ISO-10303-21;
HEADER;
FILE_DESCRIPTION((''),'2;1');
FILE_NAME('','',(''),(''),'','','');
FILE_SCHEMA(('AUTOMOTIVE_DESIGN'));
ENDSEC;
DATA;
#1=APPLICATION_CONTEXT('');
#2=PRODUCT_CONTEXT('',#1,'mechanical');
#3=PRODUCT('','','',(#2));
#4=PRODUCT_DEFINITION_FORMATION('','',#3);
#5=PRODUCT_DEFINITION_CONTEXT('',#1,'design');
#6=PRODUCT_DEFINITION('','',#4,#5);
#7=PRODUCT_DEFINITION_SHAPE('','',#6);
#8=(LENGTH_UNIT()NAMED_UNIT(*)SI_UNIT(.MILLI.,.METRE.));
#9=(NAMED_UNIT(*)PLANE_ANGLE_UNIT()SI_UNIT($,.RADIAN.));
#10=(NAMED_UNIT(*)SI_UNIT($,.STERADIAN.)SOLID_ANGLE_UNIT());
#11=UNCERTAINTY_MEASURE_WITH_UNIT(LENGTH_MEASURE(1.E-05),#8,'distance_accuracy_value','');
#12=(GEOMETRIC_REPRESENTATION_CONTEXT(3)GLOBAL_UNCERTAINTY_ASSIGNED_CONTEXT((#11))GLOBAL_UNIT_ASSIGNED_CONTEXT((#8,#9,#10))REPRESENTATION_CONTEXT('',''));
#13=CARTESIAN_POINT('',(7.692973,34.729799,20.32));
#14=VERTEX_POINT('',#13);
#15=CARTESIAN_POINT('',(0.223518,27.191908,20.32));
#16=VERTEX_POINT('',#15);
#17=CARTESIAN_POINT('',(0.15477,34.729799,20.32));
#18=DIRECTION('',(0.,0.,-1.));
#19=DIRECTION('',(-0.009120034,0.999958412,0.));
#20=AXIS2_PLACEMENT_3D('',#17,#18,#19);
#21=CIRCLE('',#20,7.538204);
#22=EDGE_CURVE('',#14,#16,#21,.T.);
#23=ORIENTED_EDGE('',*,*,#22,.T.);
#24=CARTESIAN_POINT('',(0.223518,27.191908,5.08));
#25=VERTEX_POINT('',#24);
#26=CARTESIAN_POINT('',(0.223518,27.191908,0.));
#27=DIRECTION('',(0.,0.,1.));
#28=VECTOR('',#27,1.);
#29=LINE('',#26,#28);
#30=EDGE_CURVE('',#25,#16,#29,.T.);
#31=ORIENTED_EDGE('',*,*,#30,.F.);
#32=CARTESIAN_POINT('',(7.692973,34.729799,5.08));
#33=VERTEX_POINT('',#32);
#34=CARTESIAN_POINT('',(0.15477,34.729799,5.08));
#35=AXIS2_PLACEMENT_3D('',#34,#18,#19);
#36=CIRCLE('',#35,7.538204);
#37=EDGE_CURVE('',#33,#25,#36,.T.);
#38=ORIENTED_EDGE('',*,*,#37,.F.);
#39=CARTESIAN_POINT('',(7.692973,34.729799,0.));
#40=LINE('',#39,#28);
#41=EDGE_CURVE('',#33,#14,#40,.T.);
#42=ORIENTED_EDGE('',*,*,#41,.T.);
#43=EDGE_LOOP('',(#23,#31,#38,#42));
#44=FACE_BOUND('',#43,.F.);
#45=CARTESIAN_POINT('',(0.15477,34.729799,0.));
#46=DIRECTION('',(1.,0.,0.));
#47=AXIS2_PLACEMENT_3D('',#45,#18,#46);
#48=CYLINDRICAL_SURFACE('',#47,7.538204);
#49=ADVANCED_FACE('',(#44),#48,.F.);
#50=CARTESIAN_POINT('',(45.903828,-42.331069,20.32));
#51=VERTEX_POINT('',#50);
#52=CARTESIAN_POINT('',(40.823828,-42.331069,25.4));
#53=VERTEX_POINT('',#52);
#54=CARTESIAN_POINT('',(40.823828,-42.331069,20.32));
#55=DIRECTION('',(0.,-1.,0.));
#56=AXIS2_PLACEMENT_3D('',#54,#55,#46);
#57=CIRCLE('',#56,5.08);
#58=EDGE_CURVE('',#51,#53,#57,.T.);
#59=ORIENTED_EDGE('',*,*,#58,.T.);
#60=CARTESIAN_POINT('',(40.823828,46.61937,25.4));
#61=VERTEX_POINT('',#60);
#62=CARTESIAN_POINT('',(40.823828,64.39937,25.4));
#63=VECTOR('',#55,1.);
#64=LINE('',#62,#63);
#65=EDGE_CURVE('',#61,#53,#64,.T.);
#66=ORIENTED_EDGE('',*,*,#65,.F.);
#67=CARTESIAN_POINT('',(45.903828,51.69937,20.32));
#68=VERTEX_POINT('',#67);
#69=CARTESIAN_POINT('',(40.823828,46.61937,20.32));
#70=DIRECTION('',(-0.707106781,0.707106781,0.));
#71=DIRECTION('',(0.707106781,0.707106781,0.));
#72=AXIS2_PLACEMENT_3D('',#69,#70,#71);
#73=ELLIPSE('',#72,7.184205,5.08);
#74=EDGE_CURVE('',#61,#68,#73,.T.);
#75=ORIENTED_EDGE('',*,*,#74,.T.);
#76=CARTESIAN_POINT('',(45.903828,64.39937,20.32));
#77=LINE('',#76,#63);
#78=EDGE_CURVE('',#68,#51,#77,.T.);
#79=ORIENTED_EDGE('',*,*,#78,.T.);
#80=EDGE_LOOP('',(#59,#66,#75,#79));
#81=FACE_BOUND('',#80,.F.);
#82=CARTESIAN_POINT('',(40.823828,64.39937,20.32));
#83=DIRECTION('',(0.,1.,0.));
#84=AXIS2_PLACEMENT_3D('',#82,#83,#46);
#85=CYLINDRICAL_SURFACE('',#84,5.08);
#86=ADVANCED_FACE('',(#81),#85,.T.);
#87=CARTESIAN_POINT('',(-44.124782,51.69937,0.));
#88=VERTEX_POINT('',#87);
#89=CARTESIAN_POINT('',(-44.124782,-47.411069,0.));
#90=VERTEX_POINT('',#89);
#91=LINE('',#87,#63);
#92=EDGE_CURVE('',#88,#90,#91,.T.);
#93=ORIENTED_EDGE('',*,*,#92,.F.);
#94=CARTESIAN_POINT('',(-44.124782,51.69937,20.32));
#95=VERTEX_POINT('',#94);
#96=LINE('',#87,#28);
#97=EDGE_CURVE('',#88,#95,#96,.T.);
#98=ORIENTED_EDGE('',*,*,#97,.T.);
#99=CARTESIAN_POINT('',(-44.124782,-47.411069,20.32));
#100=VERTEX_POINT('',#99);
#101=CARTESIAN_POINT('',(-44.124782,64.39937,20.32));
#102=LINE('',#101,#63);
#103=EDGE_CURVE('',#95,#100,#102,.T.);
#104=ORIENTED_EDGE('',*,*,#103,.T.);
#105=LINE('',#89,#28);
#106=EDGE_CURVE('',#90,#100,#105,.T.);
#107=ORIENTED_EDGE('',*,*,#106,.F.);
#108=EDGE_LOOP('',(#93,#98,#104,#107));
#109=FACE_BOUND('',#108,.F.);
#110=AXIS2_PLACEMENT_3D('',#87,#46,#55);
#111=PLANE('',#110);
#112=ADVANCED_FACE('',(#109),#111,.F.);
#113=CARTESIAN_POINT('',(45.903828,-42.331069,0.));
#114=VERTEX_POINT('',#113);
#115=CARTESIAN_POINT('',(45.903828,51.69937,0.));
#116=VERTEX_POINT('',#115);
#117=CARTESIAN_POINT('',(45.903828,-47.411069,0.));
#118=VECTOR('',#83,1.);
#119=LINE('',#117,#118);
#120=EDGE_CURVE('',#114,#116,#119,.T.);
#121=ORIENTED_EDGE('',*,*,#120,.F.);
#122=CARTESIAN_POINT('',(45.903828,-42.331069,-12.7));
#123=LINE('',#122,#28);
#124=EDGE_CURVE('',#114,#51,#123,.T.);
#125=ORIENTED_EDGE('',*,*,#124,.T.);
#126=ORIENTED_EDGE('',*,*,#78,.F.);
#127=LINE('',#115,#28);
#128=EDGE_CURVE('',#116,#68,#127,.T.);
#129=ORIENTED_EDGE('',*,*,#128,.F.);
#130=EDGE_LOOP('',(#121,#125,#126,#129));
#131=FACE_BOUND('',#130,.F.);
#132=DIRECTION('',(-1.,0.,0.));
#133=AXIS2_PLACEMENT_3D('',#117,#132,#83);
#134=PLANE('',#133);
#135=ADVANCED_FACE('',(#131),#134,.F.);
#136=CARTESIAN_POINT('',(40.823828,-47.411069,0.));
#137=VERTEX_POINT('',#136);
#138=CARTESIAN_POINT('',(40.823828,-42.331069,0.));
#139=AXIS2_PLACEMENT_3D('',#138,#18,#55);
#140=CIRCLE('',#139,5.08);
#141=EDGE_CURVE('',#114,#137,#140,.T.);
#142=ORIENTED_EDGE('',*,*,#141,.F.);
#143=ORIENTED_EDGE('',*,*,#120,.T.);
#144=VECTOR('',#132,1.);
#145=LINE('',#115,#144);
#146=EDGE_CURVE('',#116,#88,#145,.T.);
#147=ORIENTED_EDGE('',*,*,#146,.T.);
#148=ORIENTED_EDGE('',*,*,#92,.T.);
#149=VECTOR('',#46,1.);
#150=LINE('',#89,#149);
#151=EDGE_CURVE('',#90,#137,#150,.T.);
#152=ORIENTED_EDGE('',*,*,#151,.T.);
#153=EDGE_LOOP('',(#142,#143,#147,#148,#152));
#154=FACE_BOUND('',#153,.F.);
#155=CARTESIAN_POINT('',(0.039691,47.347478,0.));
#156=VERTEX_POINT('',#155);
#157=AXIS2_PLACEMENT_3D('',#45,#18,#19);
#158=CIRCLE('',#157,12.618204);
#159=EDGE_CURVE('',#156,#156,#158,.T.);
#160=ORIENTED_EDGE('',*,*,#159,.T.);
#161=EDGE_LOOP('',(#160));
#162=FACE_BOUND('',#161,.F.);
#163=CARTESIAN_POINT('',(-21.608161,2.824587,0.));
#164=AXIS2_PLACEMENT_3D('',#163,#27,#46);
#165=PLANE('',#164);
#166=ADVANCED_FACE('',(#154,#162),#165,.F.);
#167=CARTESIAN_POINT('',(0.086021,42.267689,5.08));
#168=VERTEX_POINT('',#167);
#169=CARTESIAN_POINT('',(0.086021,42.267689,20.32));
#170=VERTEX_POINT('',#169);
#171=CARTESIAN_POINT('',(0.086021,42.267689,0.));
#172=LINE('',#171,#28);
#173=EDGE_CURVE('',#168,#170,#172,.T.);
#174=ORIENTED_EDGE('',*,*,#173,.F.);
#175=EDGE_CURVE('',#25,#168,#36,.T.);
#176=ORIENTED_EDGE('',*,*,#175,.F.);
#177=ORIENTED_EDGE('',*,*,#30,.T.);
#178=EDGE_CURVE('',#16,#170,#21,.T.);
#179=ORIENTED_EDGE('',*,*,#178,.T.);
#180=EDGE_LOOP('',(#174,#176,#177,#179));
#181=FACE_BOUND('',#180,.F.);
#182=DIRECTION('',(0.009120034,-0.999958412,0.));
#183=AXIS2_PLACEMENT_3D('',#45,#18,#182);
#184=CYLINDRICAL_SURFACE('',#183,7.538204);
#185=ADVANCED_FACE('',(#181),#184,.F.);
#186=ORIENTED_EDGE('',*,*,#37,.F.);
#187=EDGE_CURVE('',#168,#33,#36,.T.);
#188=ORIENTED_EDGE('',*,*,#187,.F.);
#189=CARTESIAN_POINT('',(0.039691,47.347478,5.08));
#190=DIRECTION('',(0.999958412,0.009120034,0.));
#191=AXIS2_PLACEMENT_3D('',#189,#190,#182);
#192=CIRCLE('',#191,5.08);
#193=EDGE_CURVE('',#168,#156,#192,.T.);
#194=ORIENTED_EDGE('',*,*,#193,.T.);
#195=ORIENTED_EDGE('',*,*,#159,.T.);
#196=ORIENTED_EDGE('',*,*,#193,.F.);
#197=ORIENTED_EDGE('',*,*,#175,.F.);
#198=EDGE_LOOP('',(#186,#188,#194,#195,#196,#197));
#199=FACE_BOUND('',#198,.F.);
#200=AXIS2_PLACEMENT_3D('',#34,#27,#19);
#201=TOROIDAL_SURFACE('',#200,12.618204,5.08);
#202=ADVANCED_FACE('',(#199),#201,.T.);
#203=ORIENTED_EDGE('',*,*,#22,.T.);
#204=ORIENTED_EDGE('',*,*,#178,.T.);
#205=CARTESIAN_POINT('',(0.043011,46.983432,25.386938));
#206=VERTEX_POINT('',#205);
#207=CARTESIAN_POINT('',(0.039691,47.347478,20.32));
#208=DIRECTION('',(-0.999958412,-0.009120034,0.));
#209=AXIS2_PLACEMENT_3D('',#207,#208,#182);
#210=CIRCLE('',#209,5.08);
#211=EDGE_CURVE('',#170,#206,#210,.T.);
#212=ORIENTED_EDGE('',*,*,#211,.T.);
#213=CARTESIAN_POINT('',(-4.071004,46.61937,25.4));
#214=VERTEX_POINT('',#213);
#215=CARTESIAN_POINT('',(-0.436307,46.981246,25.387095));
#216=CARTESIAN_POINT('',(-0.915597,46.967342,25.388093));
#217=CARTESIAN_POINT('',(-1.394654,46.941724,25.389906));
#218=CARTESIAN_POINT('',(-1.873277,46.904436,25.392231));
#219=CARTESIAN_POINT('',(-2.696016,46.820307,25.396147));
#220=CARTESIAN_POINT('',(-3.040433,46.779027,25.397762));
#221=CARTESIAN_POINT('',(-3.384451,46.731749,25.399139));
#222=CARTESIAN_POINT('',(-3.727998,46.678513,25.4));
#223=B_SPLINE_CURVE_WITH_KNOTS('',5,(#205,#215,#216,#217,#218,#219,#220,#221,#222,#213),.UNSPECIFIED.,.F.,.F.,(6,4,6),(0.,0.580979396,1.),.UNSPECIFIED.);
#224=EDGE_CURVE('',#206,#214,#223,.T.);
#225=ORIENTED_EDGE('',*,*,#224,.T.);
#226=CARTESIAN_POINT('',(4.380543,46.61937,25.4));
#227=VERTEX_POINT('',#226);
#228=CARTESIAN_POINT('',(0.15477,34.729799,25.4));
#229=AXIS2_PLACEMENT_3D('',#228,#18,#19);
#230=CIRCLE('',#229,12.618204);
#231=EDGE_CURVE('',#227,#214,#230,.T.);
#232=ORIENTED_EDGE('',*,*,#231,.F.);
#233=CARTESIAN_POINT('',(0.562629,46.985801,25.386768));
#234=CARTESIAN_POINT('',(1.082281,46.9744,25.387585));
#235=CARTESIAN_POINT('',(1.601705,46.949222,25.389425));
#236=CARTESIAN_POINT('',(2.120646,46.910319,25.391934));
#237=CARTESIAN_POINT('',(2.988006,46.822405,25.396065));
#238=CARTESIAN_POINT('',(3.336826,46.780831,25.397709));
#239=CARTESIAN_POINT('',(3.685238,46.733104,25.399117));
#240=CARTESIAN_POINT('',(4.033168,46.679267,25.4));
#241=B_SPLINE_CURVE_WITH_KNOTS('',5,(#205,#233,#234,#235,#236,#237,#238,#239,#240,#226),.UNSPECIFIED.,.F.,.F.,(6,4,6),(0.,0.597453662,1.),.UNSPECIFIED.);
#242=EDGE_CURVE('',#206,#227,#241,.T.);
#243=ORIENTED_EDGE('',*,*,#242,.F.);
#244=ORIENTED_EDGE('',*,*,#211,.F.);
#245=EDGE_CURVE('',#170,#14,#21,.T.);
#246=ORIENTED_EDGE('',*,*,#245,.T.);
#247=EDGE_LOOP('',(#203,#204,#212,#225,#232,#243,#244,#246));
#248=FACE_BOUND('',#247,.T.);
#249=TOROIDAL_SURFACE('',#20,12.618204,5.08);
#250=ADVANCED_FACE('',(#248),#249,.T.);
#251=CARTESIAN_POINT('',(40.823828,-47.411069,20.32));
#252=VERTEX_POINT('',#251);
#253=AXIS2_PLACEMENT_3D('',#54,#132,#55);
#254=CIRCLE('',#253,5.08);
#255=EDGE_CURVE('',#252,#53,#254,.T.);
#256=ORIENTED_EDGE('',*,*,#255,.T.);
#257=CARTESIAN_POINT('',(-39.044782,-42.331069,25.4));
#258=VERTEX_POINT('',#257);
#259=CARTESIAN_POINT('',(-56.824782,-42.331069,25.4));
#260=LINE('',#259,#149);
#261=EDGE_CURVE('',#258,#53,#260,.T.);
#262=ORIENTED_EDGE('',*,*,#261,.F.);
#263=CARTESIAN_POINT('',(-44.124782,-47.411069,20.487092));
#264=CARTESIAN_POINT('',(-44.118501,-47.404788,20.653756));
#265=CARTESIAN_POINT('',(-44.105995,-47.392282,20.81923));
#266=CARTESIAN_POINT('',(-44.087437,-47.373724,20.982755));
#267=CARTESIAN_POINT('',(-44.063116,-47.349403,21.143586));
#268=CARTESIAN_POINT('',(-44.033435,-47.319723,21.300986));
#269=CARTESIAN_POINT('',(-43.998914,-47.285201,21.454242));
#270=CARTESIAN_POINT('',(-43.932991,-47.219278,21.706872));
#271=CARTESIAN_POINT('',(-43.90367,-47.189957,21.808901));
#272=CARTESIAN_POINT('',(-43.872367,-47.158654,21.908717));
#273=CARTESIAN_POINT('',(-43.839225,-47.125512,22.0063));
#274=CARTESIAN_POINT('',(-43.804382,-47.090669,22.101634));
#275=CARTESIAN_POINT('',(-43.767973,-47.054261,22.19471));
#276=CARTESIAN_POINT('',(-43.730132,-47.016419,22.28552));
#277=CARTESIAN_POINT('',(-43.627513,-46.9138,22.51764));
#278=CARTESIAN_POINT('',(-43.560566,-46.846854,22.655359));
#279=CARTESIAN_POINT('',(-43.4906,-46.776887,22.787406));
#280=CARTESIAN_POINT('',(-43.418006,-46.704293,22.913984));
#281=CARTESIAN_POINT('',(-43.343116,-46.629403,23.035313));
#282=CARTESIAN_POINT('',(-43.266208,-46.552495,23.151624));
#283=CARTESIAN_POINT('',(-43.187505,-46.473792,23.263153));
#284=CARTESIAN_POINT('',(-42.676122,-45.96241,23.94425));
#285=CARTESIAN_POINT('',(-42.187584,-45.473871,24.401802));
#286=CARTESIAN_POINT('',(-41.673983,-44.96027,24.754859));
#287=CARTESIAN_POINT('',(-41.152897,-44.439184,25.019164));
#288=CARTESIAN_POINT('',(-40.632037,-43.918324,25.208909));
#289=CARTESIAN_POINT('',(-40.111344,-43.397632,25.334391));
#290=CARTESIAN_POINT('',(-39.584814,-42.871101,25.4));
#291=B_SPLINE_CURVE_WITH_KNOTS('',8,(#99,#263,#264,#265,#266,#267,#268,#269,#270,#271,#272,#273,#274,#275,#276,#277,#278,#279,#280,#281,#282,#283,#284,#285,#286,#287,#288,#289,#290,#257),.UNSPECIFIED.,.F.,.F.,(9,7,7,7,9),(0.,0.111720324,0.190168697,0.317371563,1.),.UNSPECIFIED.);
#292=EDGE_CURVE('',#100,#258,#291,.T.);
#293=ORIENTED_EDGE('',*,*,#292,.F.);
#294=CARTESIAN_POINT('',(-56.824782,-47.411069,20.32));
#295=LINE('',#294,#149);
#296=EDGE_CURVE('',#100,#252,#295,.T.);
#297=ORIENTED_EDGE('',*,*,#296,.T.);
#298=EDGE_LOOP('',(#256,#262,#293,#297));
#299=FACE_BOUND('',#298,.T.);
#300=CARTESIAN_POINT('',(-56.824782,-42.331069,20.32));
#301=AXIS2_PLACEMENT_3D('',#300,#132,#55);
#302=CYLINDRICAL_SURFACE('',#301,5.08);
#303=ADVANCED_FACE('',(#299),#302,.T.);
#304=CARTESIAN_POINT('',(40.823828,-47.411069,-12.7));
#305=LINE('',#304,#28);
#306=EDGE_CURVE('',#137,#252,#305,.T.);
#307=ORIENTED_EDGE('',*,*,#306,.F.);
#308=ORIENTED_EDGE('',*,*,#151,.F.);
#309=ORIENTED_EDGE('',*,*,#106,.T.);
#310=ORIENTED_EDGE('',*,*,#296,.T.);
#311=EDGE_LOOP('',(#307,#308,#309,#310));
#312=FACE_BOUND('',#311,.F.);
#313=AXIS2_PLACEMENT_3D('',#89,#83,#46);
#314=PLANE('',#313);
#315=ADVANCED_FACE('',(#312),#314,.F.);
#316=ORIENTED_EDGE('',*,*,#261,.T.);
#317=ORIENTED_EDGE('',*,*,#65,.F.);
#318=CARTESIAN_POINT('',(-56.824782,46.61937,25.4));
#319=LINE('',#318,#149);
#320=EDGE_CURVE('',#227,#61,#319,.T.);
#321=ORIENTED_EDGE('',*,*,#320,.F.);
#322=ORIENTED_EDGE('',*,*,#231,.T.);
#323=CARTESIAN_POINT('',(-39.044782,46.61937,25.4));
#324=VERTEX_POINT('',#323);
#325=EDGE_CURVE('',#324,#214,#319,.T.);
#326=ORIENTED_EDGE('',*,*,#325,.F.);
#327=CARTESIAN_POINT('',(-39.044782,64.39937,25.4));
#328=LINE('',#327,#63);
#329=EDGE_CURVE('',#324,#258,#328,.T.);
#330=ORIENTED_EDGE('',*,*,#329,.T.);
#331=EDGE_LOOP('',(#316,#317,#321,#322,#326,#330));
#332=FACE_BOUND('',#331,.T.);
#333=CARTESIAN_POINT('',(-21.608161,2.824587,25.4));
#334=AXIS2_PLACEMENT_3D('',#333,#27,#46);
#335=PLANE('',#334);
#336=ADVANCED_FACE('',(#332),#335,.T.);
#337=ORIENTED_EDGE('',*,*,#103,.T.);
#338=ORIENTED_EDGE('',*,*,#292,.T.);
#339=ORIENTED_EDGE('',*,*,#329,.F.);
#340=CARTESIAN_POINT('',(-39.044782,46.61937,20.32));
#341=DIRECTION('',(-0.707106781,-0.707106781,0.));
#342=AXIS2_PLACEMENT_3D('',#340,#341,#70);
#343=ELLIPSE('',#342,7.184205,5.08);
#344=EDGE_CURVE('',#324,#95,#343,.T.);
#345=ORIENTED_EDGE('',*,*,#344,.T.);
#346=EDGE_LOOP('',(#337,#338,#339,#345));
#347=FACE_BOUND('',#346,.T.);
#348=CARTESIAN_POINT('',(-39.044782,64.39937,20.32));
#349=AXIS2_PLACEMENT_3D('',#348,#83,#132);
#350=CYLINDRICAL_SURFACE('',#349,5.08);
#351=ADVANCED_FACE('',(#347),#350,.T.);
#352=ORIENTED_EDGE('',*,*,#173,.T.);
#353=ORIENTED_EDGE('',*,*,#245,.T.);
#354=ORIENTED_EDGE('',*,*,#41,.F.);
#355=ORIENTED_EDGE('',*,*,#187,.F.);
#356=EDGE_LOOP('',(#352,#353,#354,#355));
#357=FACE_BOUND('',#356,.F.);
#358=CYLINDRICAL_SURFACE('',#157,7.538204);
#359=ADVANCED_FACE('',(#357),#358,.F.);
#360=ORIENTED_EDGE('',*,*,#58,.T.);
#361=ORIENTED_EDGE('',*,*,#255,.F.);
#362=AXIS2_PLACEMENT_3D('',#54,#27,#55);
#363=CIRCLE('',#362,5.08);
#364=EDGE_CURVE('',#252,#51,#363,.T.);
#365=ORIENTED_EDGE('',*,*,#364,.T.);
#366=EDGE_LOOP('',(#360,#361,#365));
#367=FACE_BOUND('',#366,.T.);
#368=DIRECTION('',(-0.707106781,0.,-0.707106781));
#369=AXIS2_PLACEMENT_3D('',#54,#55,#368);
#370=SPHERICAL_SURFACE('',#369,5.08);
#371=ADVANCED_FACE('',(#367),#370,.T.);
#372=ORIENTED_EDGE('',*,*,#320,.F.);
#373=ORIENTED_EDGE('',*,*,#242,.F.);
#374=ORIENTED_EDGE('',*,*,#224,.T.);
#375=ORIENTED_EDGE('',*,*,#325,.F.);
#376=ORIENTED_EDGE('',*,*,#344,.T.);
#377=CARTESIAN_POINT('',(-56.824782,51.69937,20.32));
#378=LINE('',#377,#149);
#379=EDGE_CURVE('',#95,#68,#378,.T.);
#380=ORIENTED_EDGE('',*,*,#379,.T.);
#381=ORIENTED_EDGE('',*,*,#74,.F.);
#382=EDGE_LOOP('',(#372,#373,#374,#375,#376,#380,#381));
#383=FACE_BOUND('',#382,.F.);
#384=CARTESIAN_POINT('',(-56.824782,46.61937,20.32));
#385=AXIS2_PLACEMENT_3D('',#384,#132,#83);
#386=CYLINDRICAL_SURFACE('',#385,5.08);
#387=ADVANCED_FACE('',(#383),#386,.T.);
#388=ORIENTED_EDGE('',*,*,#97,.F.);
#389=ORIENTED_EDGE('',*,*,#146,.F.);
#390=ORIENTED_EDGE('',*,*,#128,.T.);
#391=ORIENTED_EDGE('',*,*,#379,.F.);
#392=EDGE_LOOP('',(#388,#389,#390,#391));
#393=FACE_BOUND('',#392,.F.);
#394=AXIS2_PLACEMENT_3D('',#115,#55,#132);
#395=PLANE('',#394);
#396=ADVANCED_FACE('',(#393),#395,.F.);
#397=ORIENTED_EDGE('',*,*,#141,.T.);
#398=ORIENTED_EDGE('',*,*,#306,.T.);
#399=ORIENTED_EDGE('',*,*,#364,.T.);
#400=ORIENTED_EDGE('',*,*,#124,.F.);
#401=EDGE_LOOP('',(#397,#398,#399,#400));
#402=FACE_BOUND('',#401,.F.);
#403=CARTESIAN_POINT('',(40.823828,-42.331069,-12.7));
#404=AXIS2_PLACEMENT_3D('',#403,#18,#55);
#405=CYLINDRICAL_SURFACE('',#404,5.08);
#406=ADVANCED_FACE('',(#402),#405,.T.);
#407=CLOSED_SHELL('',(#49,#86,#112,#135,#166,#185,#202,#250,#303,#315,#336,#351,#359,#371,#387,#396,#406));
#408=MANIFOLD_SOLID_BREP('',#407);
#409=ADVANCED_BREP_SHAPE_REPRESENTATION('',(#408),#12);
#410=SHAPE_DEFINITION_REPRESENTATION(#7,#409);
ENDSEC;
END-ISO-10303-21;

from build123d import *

# Parameters (mm, degrees)
F1_DEPTH     = 25.4
F2_T1_DEPTH  = 97.6486100805
F2_T3_DEPTH  = 106.7304394197
F2_T5_DEPTH  = 33.02
F2_T7_DEPTH  = 115.4286100805
F2_T9_DEPTH  = 124.5104394197
F2_S13_W     = 5.08
F2_S13_H     = 5.08
F2_T14_DEPTH = 5.08


# Not quite as in the source:
# - a fillet or chamfer that OpenCascade refuses, or shapes differently, is made with other operations: its cross-section is extruded or revolved along the edge and cut away or added


with BuildPart() as f1:
    # F0 (on Top) → F1 (new body)
    with BuildSketch(Plane.XY):
        with BuildLine():
            Line((0, 51.6993701458), (-44.1247820854, 51.6993701458))
            Line((-44.1247820854, 51.6993701458), (-44.1247820854, -47.4110692739))
            Line((-44.1247820854, -47.4110692739), (0.8895229548, -47.4110692739))
            Line((0.8895229548, -47.4110692739), (0.8895229548, -45.8316206932))
            Line((0.8895229548, -45.8316206932), (0.223518183, 27.1919083226))
            ThreePointArc((0.223518183, 27.1919083226), (-7.3831209657, 34.6610501168), (0.0860208286, 42.2676892655))
            Line((0.0860208286, 42.2676892655), (0, 51.6993701458))
        make_face()
        with BuildLine():
            Line((45.9038279951, 51.6993701458), (0, 51.6993701458))
            Line((0, 51.6993701458), (0.0860208286, 42.2676892655))
            ThreePointArc((0.0860208286, 42.2676892655), (5.4607226524, 40.0843651019), (7.6929734789, 34.729798794))
            ThreePointArc((7.6929734789, 34.729798794), (5.5093358137, 29.4238456474), (0.223518183, 27.1919083226))
            Line((0.223518183, 27.1919083226), (0.8895229548, -45.8316206932))
            Line((0.8895229548, -45.8316206932), (0.8895229548, -47.4110692739))
            Line((0.8895229548, -47.4110692739), (45.9038279951, -47.4110692739))
            Line((45.9038279951, -47.4110692739), (45.9038279951, 51.6993701458))
        make_face()
    extrude(amount=F1_DEPTH)

    # F2: fillet of radius 5.08 on 8 edges, made by hand

    # F2_s2 → F2_t1 (cut)
    with BuildSketch(Plane.YZ.offset(-56.8247820854)):
        with BuildLine():
            ThreePointArc((-47.4110692739, 20.32), (-45.9231717224, 23.9121024484), (-42.3310692739, 25.4))
            Line((-42.3310692739, 25.4), (-47.4110692739, 25.4))
            Line((-47.4110692739, 25.4), (-47.4110692739, 20.32))
        make_face()
    extrude(amount=F2_T1_DEPTH, mode=Mode.SUBTRACT)

    # F2_s4 → F2_t3 (cut)
    with BuildSketch(Plane.XZ.offset(-64.3993701458)):
        with BuildLine():
            ThreePointArc((45.9038279951, 20.32), (44.4159304435, 23.9121024484), (40.8238279951, 25.4))
            Line((40.8238279951, 25.4), (45.9038279951, 25.4))
            Line((45.9038279951, 25.4), (45.9038279951, 20.32))
        make_face()
    extrude(amount=F2_T3_DEPTH, mode=Mode.SUBTRACT)

    # F2_s6 → F2_t5 (cut)
    with BuildSketch(Plane.XY.offset(-12.7)):
        with BuildLine():
            ThreePointArc((40.8238279951, -47.4110692739), (44.4159304435, -45.9231717224), (45.9038279951, -42.3310692739))
            Line((45.9038279951, -42.3310692739), (45.9038279951, -47.4110692739))
            Line((45.9038279951, -47.4110692739), (40.8238279951, -47.4110692739))
        make_face()
    extrude(amount=F2_T5_DEPTH, mode=Mode.SUBTRACT)

    # F2_s8 → F2_t7 (cut)
    with BuildSketch(Plane.YZ.offset(-56.8247820854)):
        with BuildLine():
            ThreePointArc((51.6993701458, 20.32), (50.2114725942, 23.9121024484), (46.6193701458, 25.4))
            Line((46.6193701458, 25.4), (51.6993701458, 25.4))
            Line((51.6993701458, 25.4), (51.6993701458, 20.32))
        make_face()
    extrude(amount=F2_T7_DEPTH, mode=Mode.SUBTRACT)

    # F2_s10 → F2_t9 (cut)
    with BuildSketch(Plane.XZ.offset(-64.3993701458)):
        with BuildLine():
            ThreePointArc((-44.1247820854, 20.32), (-42.6368845338, 23.9121024484), (-39.0447820854, 25.4))
            Line((-39.0447820854, 25.4), (-44.1247820854, 25.4))
            Line((-44.1247820854, 25.4), (-44.1247820854, 20.32))
        make_face()
    extrude(amount=F2_T9_DEPTH, mode=Mode.SUBTRACT)


with BuildPart() as f2_tool12:
    # F2_s13 → F2_t14 (new body)
    with BuildSketch(Plane.XZ.offset(42.3310692739)):
        with Locations((43.3638279951, 22.86)):
            Rectangle(F2_S13_W, F2_S13_H)
    extrude(amount=F2_T14_DEPTH)

    # F2_s15 → F2_t16 (revolve, cut)
    with BuildSketch(Plane(origin=(40.8238279951, -42.3310692739, 20.32), x_dir=(-0.7071067812, 0, -0.7071067812), z_dir=(-0.7071067812, 0, 0.7071067812))):
        with BuildLine():
            ThreePointArc((0, -5.08), (5.08, 0), (0, 5.08))
            Line((0, 5.08), (0, -5.08))
        make_face()
    revolve(axis=Axis((40.8238279951, -42.3310692739, 20.32), (0, -1, 0)), mode=Mode.SUBTRACT)


with BuildPart() as f1_1:
    add(f1.part)

    # F2_t11: cut F2_tool12
    add(f2_tool12.part, mode=Mode.SUBTRACT)

    # F2_s17 → F2_t18 (revolve, cut)
    with BuildSketch(Plane(origin=(0.4714804091, 0.0043000962, 0), x_dir=(0, 0, 1), z_dir=(-0.9999584116, -0.0091200341, 0))):
        with BuildLine():
            ThreePointArc((20.32, 42.265146908), (23.9121024484, 43.7530444596), (25.4, 47.345146908))
            Line((25.4, 47.345146908), (25.4, 42.265146908))
            Line((25.4, 42.265146908), (20.32, 42.265146908))
        make_face()
    revolve(axis=Axis((0.1547695058, 34.729798794, 25.4), (0, 0, -1)), mode=Mode.SUBTRACT)

    # F2_s19 → F2_t20 (revolve, cut)
    with BuildSketch(Plane(origin=(0.4714804091, 0.0043000962, 0), x_dir=(0, 0, 1), z_dir=(-0.9999584116, -0.0091200341, 0))):
        with BuildLine():
            ThreePointArc((5.08, 42.265146908), (1.4878975516, 43.7530444596), (0, 47.345146908))
            Line((0, 47.345146908), (0, 42.265146908))
            Line((0, 42.265146908), (5.08, 42.265146908))
        make_face()
    revolve(axis=Axis((0.1547695058, 34.729798794, 0), (0, 0, -1)), mode=Mode.SUBTRACT)


solid = f1_1.part
